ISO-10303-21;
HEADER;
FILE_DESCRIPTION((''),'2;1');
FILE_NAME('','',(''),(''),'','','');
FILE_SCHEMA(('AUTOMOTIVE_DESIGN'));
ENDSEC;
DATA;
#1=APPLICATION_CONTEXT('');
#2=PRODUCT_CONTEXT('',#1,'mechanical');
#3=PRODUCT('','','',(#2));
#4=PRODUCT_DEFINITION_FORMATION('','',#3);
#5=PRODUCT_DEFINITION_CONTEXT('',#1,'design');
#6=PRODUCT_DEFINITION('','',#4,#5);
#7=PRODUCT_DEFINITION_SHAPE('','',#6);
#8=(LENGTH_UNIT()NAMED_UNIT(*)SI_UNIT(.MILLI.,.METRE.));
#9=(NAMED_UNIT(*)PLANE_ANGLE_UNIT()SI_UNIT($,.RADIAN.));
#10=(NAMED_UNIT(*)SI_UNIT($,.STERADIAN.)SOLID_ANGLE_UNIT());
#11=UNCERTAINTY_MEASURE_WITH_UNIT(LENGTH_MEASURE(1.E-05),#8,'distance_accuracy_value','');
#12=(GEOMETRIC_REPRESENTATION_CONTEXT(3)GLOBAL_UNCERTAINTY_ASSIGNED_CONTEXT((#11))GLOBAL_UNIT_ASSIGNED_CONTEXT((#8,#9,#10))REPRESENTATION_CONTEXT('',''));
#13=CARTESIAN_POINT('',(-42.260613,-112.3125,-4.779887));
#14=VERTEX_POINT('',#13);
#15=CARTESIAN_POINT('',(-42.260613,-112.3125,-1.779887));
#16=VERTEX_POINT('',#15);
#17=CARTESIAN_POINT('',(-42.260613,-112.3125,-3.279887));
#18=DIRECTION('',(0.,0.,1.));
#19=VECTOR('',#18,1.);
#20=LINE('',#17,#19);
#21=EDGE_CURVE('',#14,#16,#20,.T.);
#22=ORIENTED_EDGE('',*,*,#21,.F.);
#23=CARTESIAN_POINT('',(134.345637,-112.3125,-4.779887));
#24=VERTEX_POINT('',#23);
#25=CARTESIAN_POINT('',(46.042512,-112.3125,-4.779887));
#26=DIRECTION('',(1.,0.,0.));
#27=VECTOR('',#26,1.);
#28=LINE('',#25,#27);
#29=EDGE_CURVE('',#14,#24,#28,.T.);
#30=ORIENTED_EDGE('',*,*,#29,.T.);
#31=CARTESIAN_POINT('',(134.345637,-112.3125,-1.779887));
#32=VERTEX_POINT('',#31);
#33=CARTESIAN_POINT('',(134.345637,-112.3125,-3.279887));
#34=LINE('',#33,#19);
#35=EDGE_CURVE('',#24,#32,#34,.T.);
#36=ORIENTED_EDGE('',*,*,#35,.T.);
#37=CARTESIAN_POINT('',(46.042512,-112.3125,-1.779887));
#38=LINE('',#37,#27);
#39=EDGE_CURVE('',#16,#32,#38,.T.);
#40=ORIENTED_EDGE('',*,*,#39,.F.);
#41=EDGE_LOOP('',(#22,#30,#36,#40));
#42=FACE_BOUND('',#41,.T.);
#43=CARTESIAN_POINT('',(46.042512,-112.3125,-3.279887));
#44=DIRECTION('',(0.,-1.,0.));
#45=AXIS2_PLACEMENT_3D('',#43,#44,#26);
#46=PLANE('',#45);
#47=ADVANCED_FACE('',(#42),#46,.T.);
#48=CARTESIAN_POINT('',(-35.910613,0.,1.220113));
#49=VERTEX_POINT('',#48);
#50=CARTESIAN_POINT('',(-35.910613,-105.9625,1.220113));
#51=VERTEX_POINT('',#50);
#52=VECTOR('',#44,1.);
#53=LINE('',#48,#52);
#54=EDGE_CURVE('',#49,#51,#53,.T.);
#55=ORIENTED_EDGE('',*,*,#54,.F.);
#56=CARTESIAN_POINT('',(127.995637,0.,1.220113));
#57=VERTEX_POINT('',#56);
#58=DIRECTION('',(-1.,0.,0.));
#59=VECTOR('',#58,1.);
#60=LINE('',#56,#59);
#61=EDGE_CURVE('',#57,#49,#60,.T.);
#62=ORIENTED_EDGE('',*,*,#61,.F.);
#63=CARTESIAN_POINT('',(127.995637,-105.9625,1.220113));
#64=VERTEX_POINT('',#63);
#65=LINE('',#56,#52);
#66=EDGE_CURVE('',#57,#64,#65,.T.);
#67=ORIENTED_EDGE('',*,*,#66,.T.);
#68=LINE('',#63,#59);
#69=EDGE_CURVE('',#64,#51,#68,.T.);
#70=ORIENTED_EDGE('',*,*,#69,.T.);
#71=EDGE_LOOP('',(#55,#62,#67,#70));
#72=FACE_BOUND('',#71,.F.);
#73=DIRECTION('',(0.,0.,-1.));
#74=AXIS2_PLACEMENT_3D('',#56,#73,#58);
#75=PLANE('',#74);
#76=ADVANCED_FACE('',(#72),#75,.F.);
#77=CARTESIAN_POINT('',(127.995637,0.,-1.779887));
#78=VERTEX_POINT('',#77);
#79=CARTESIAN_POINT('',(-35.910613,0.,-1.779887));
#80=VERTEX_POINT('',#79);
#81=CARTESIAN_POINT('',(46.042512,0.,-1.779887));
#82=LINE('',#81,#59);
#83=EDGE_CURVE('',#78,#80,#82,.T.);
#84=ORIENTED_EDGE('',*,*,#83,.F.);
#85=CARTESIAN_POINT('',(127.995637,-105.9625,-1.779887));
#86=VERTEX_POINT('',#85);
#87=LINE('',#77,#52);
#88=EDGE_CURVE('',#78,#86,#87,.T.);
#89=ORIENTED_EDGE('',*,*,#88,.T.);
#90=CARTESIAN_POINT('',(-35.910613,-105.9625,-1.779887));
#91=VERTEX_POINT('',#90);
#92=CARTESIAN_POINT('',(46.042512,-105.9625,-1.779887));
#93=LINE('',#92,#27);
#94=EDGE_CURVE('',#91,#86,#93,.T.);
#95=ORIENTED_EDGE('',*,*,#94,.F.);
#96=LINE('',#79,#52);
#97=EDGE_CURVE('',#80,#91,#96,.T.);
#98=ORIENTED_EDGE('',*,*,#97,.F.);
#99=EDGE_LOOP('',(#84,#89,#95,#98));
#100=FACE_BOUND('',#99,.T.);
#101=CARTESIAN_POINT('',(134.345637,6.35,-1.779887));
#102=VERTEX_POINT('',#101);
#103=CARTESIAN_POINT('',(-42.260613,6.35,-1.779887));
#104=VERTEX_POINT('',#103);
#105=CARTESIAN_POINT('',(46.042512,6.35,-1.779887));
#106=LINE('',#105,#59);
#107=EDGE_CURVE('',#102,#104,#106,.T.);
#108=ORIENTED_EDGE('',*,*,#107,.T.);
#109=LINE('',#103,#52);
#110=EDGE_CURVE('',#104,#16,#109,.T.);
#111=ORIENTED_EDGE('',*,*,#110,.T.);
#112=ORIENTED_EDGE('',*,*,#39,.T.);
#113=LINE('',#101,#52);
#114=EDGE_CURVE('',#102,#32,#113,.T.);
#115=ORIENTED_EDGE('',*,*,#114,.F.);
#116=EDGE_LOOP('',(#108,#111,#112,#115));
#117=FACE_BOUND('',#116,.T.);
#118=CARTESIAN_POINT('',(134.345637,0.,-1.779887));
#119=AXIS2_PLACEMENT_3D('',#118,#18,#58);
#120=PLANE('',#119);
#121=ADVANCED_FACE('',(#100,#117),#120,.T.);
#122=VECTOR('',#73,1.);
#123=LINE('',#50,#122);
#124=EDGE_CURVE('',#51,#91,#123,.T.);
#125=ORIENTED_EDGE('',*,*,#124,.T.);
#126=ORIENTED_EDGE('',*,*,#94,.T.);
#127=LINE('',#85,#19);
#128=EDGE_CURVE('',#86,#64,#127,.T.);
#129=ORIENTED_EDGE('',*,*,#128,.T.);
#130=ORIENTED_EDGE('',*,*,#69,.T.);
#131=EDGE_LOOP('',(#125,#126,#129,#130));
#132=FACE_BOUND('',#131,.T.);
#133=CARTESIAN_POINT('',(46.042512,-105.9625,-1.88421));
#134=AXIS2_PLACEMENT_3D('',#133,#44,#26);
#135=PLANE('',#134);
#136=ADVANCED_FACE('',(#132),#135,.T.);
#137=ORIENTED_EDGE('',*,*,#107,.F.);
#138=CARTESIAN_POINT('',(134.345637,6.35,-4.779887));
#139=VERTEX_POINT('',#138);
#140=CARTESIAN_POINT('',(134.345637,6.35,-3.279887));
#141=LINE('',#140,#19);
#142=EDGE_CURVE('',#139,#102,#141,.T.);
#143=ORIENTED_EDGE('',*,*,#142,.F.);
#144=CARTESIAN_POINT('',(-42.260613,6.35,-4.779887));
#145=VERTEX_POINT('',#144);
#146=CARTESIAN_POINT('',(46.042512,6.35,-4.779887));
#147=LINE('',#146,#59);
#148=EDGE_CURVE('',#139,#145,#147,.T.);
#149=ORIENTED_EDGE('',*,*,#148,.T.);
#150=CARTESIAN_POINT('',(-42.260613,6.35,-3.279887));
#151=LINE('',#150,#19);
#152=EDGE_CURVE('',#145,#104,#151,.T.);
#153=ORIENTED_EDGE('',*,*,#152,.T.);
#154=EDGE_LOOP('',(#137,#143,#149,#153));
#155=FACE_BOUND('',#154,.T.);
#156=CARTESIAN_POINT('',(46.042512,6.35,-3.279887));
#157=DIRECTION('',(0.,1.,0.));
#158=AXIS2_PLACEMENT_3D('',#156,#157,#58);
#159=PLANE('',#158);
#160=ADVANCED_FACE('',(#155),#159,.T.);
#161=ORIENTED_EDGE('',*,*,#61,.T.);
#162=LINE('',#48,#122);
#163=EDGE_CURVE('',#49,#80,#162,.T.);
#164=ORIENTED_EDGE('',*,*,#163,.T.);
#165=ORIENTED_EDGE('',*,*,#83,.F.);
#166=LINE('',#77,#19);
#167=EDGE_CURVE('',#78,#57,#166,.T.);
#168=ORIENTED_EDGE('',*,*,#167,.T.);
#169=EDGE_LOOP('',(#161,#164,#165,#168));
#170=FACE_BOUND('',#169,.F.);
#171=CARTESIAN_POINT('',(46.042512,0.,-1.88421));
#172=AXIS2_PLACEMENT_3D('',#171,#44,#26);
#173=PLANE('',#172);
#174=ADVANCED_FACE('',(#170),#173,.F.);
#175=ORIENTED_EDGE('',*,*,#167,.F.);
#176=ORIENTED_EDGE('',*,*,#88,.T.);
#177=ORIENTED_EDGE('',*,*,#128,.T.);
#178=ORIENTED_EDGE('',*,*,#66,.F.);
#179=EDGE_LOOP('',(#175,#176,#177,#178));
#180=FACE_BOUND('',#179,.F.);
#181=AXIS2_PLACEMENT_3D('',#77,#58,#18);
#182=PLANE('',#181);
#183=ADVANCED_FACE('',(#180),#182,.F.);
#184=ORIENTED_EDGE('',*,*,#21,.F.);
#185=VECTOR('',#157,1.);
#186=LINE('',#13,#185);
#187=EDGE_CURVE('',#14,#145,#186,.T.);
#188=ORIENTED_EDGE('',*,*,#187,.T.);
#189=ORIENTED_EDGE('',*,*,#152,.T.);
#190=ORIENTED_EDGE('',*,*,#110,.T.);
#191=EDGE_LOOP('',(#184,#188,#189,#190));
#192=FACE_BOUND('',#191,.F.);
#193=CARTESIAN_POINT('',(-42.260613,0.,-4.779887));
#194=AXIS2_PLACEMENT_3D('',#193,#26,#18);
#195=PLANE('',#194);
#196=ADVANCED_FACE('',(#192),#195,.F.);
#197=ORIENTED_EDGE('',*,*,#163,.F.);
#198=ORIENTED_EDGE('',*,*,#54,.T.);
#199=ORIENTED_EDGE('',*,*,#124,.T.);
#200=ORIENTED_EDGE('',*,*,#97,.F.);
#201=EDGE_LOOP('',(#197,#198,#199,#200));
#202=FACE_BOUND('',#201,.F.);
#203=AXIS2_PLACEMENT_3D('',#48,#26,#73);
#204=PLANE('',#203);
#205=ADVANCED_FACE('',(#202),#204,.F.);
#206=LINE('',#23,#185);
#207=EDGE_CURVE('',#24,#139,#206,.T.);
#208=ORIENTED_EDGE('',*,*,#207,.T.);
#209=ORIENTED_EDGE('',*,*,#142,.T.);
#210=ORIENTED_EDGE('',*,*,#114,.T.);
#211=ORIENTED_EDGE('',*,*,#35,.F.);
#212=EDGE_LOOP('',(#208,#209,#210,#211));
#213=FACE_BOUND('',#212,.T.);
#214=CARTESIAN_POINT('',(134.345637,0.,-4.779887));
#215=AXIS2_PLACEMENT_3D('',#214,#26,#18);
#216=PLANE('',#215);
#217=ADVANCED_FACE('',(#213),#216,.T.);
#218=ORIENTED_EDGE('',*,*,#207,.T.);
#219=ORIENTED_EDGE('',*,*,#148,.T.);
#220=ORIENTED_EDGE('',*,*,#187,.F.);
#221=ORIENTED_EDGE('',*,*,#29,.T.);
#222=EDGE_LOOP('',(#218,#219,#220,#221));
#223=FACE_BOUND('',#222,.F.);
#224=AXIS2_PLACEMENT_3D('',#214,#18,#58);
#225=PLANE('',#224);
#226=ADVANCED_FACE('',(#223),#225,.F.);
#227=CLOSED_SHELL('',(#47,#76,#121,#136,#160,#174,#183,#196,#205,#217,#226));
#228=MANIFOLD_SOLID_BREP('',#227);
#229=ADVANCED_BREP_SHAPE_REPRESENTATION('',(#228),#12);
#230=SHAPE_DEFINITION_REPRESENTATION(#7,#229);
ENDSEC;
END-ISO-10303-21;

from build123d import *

# Parameters (mm, degrees)
F2_DEPTH = 105.9625
F3_W     = 176.60625
F3_H     = 3
F4_DEPTH = 6.35
F5_W     = 176.60625
F5_H     = 3
F6_DEPTH = 6.35


# Not quite as in the source:
# - a length typed as a fraction of an inch, garbled in the dataset ("3 / 203.2 mm" for 3/8 in), is restored


with BuildPart() as f2:
    # F1 (on Front) → F2 (new body)
    with BuildSketch(Plane.XZ):
        Polygon((-42.2606132925, -1.7798869123), (-42.2606132925, -4.7798869123), (134.3456367075, -4.7798869123), (134.3456367075, -1.7798869123), (127.9956367075, -1.7798869123), (127.9956367075, 1.2201130877), (-35.9106132925, 1.2201130877), (-35.9106132925, -1.7798869123), align=None)
    extrude(amount=F2_DEPTH)

    # F3 (on face) → F4 (join)
    with BuildSketch(Plane.XZ.offset(105.9625)):
        with Locations((46.0425117075, -3.2798869123)):
            Rectangle(F3_W, F3_H)
    extrude(amount=F4_DEPTH)

    # F5 (on face) → F6 (join)
    with BuildSketch(Plane(origin=(0, 0, 0), x_dir=(-1, 0, 0), z_dir=(0, 1, 0))):
        with Locations((-46.0425117075, -3.2798869123)):
            Rectangle(F5_W, F5_H)
    extrude(amount=F6_DEPTH)


solid = f2.part
